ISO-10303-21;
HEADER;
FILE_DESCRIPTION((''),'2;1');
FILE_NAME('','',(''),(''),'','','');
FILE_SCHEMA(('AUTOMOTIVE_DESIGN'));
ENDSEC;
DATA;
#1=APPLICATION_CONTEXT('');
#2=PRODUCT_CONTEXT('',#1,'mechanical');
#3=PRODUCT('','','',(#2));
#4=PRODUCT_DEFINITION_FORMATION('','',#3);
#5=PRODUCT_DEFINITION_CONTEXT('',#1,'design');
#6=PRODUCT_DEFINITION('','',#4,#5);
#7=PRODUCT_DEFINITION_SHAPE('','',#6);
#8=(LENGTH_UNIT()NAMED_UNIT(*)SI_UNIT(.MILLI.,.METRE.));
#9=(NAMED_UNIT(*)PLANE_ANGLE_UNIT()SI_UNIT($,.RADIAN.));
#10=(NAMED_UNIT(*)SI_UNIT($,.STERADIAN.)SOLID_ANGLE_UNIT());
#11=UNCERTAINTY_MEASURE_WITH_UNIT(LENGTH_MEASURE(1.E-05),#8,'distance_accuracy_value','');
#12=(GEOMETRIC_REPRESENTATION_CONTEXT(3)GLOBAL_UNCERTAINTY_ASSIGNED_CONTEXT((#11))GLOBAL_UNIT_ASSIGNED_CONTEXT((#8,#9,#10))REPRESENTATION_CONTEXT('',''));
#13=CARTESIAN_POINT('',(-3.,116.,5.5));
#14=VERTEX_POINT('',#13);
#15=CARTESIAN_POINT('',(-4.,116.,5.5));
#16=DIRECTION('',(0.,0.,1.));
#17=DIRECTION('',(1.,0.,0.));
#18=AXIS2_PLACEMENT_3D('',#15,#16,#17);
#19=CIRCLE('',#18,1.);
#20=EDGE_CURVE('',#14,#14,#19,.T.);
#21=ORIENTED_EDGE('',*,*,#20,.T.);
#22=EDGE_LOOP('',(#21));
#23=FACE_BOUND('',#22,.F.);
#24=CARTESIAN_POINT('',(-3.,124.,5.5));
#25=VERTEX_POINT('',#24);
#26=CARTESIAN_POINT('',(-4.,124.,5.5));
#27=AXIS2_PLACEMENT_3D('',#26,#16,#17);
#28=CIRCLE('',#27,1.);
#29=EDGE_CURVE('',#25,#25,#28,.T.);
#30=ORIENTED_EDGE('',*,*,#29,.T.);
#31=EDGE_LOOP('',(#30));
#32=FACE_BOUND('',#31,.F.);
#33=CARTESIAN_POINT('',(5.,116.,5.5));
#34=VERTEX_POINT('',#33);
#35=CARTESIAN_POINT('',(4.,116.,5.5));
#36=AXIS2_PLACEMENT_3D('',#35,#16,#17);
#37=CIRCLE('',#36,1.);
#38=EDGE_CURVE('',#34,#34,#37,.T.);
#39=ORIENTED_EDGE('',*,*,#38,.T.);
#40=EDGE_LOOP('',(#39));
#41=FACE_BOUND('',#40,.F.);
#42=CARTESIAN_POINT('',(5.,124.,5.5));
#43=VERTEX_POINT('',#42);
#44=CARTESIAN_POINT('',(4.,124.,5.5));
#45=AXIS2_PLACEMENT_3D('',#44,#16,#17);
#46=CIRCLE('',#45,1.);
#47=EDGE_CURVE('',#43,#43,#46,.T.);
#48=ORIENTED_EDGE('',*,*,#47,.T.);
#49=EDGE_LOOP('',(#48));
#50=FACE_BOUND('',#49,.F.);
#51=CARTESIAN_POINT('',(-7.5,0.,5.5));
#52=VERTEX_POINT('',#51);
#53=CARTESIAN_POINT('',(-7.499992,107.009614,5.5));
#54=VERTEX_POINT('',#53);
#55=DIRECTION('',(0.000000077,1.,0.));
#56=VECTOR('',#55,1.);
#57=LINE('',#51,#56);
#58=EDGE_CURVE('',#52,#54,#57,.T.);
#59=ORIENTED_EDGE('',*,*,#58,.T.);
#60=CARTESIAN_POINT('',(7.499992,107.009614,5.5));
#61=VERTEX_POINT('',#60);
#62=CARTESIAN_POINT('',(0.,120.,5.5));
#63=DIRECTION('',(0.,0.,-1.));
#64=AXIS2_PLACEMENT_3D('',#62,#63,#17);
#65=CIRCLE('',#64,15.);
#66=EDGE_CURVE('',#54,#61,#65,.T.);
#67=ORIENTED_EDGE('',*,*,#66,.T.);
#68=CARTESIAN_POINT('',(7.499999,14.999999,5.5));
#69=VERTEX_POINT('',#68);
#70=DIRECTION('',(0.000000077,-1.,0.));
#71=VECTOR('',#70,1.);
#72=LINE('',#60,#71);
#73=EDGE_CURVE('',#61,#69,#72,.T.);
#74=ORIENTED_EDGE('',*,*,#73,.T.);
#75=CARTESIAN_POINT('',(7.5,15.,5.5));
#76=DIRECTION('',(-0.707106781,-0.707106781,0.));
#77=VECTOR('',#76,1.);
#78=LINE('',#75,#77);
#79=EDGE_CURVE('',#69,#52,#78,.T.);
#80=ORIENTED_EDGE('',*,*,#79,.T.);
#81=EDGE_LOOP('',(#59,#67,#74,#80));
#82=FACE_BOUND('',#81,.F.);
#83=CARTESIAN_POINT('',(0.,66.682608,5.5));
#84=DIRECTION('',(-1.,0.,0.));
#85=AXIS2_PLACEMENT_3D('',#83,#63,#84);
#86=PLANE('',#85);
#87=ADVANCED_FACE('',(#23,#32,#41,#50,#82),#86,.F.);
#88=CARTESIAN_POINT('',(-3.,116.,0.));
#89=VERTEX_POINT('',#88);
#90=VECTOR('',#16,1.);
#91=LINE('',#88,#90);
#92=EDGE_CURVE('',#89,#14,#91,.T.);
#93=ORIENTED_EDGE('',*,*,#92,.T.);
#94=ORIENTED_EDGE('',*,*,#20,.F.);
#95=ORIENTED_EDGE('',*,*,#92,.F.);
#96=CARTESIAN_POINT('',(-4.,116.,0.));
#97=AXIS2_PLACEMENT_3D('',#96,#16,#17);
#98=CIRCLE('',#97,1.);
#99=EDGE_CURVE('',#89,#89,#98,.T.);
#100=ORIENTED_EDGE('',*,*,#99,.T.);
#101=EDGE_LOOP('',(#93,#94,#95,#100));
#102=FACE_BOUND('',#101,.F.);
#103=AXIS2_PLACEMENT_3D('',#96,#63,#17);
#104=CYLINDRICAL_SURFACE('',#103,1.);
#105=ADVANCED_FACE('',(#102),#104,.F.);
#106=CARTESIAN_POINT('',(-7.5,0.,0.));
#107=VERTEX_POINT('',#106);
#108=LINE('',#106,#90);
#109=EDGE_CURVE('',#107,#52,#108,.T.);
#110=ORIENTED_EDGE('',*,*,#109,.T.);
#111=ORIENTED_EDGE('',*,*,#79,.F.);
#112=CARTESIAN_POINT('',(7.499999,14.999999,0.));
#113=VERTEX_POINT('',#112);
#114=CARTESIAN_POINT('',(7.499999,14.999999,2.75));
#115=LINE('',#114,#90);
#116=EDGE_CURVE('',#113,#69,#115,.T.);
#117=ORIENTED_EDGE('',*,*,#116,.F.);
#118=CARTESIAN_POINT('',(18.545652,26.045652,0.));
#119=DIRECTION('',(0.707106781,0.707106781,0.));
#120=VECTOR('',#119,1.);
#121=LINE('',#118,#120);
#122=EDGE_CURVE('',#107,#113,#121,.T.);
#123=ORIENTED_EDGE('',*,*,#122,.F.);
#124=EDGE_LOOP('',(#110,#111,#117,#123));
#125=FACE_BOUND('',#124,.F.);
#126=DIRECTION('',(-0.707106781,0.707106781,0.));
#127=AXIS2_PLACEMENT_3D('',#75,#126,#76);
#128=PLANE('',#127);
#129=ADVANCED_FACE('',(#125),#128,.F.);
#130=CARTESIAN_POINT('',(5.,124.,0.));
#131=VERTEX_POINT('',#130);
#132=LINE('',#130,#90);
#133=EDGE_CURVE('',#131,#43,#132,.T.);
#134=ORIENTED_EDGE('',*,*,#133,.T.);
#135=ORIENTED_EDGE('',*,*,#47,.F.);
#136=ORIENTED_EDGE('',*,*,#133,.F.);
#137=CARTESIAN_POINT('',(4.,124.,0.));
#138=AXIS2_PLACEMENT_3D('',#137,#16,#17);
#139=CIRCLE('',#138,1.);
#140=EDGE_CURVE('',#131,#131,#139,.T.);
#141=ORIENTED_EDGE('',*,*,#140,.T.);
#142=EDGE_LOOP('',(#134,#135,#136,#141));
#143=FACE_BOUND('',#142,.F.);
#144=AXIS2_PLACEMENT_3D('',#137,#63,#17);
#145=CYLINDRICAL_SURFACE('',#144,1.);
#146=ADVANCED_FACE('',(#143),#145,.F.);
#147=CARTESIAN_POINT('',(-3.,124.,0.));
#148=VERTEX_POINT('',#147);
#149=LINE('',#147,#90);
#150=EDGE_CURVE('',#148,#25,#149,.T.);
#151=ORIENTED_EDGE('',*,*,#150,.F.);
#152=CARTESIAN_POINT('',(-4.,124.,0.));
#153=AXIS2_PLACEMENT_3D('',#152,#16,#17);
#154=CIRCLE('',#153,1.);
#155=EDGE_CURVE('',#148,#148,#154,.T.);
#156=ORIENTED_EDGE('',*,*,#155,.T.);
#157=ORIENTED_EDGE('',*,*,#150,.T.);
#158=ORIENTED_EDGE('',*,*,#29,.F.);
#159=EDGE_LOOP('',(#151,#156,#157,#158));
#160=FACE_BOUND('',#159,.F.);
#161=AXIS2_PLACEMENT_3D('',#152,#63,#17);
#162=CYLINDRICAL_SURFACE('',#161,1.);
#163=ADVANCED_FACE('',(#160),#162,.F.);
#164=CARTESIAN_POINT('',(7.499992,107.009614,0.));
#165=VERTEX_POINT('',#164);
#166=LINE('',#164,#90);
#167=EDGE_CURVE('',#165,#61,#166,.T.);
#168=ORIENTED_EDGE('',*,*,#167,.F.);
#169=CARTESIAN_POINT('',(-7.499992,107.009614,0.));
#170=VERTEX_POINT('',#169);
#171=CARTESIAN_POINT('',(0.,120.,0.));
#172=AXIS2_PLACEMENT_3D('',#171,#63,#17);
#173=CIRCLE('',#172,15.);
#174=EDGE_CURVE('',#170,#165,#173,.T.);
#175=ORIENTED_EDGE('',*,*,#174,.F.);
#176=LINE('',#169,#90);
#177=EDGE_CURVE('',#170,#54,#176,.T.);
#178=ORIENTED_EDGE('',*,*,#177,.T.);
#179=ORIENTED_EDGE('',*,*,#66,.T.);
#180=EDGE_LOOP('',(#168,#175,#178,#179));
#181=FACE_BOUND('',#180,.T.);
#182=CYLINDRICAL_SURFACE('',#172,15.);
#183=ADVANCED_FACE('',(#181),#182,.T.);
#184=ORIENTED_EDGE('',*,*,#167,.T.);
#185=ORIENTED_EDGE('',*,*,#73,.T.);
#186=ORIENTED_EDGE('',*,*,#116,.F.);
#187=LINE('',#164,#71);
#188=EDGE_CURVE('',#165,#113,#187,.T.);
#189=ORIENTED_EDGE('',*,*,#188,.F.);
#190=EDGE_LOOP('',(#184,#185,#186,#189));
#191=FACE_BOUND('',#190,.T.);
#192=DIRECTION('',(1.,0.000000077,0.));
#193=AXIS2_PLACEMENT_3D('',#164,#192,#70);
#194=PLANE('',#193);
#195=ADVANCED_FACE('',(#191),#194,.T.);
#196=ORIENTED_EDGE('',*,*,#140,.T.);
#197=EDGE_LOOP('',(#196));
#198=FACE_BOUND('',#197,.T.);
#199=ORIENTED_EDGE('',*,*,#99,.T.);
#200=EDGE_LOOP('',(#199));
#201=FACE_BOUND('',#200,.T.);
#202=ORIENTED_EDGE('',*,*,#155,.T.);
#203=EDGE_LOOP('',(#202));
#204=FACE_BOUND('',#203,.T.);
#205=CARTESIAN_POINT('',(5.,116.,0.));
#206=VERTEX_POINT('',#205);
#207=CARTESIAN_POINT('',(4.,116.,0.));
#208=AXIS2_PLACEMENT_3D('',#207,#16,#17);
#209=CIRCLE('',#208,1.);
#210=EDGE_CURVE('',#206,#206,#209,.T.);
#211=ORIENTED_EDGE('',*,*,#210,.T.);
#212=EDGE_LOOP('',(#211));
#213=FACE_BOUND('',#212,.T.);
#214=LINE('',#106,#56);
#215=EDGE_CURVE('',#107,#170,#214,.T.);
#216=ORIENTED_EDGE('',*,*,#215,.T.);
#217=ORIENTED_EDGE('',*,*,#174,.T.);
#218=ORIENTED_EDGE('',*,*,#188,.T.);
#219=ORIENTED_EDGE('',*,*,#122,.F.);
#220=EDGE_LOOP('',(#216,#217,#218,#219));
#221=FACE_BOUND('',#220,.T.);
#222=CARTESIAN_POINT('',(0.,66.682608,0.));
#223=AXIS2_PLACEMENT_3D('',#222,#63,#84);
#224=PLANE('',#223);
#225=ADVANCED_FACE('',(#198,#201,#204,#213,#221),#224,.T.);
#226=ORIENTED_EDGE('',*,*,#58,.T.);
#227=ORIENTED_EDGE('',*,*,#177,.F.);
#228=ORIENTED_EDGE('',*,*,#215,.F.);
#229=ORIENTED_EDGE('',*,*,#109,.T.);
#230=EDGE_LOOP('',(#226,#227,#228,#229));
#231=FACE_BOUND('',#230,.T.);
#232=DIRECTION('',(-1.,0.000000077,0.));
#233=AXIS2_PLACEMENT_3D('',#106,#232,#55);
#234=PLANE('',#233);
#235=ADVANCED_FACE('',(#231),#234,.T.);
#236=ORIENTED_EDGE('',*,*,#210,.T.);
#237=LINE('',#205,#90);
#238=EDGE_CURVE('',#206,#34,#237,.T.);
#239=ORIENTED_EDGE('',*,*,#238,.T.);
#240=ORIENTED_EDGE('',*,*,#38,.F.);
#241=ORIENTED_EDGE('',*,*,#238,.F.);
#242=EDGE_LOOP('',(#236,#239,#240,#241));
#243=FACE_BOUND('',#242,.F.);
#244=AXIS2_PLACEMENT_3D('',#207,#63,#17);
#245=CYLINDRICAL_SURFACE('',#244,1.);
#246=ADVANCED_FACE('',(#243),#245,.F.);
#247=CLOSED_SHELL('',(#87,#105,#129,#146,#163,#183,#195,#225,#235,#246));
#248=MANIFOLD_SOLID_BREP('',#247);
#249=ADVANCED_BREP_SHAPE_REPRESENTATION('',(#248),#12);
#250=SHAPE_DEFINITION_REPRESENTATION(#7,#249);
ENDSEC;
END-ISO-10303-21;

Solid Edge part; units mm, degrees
sketch "Sketch1" plane through (0, 0, 0) normal (0, 0, 1) x (1, 0, 0)
  line L0 (-7.5, 0) -> (-7.5, 107.0096)
  arc A0 (-7.5, 107.0096) -> (7.5, 107.0096) centre (0, 120) cw
  line L1 (7.5, 107.0096) -> (7.5, 0)
  line L2 (7.5, 0) -> (-7.5, 0)
  circle A1 centre (-4, 116) radius 1
  circle A2 centre (4, 124) radius 1
  circle A3 centre (4, 116) radius 1
  circle A4 centre (-4, 124) radius 1
extrude "Protrusion1" add sketch "Sketch1" along normal blind 5.5
sketch "Sketch2" plane through (0, 70, 5.5) normal (0, 0, 1) x (0, -1, 0)
  line L0 (55, 7.5) -> (70, -7.5)
  line L1 (70, 7.5) -> (70, -7.5)
  line L2 (70, 7.5) -> (55, 7.5)
extrude "Cutout1" cut sketch "Sketch2" against normal through all
